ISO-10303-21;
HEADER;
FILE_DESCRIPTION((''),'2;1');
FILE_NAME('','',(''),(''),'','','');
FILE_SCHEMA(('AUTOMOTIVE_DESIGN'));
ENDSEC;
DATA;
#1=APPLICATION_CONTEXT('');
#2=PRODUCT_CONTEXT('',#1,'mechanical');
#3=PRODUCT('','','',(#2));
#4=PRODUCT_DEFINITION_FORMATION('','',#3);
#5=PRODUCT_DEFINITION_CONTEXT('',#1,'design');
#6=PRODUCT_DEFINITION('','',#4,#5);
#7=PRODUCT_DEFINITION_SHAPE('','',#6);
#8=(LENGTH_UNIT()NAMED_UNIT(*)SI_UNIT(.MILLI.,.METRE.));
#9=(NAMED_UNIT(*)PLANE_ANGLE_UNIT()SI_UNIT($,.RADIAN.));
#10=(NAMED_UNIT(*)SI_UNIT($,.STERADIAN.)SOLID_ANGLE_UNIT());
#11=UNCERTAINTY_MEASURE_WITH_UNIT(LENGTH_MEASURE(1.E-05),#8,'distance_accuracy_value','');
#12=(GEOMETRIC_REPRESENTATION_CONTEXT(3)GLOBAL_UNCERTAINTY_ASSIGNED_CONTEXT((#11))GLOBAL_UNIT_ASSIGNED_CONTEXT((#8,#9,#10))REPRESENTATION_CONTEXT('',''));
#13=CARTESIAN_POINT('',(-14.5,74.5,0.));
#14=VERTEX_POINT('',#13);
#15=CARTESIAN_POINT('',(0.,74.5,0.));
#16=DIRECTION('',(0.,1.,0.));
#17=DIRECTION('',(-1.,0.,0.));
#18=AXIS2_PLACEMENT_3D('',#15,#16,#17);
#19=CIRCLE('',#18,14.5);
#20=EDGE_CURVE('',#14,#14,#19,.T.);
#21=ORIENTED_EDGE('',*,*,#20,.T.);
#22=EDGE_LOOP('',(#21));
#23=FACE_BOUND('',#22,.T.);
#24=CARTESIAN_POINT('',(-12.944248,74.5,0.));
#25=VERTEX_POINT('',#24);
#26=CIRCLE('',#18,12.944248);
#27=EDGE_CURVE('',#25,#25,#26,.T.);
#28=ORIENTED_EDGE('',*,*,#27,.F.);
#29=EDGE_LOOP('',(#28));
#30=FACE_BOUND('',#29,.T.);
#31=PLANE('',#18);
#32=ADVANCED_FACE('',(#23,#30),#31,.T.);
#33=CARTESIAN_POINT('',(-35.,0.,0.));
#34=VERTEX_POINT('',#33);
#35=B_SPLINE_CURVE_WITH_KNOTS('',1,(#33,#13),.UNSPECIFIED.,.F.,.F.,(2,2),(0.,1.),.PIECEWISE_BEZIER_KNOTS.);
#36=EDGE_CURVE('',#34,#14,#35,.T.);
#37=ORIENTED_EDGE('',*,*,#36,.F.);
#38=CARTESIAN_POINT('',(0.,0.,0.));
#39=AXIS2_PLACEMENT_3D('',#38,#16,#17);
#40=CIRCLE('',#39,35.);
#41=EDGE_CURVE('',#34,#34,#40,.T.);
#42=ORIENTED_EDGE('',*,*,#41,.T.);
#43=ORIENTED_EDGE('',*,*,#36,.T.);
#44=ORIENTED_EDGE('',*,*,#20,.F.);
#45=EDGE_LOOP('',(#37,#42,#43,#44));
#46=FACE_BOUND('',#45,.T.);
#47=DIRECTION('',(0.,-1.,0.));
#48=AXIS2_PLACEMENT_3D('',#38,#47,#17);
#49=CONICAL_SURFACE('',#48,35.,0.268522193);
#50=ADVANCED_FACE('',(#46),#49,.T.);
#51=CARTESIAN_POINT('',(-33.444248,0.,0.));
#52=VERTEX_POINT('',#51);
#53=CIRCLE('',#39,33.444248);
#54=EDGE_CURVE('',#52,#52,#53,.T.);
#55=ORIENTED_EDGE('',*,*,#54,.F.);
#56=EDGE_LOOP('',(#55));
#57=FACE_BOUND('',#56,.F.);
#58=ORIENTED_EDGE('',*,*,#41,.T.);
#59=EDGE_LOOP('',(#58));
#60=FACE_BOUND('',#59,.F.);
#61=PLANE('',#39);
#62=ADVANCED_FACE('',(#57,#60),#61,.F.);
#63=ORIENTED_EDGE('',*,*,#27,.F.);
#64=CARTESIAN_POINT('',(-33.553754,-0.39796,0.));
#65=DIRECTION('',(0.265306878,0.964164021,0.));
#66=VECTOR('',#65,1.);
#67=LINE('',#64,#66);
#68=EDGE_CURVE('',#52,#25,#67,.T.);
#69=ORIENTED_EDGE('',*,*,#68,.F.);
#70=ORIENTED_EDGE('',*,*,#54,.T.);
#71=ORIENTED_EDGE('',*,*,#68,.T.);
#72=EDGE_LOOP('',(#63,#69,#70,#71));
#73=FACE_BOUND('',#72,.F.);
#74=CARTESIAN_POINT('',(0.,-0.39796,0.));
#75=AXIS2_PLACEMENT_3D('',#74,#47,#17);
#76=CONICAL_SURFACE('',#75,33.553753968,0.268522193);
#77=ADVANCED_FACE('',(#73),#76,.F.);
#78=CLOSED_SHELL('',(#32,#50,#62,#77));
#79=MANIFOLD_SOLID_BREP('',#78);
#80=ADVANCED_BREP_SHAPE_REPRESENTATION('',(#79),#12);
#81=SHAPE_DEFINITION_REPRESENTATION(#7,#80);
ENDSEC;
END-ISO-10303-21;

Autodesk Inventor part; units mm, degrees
ref_plane "YZ Plane" through (0, 0, 0) normal (1, 0, 0) x (0, 1, 0)
ref_plane "XY Plane" through (0, 0, 0) normal (0, 0, 1) x (1, 0, 0)
sketch "Szkic6" plane through (0, 0, 0) normal (0, 1, 0) x (-1, 0, 0)
  circle A0 centre (0, 0) radius 35
  dimension "d33" = 70
ref_plane "Płaszczyzna konstrukcyjna1" through (0, 74.5, 0) normal (0, 1, 0) x (-1, 0, 0)
sketch "Szkic7" plane through (0, 74.5, 0) normal (0, 1, 0) x (-1, 0, 0)
  circle A0 centre (0, 0) radius 14.5
  dimension "d35" = 29
loft "Wyciągnięcie złożone1" add profiles "Szkic6", "Szkic7"
shell "Skorupa1" thickness 1.5 removed faces 2 at (1.052, 74.5, -3.5603) at (1.9985, 0, 11.019)
equation "\"d33\" = OD1"
equation "\"d35\" = OD2"
equation "\"d52\" = THK"
equation "\"SzerokośćGięciaPodcięcia\" = Grubość"
equation "\"RozmiarPodcięciaNarożnika\" = 4 * Grubość"
equation "\"PromieńPrzejścia\" = PromieńGięcia"
equation "\"Rozmiar_promienia_Jacobiego\" = PromieńGięcia"
equation "\"Wielk_odstępu\" = Grubość"
equation "\"d2\" = PromieńGięcia"
equation "\"d23\" = PromieńGięcia"
equation "\"OD1\" = 70"
equation "\"OD2\" = 29"
equation "\"L\" = 74.5"
equation "\"THK\" = 1.5"
equation "\"d34\" = L"
equation "\"Grubość\" = 1.5"
equation "\"PromieńGięcia\" = 3"
properties part number "Redukcja symetryczna Ø70x29x1,5 L=74,5" material "304"
